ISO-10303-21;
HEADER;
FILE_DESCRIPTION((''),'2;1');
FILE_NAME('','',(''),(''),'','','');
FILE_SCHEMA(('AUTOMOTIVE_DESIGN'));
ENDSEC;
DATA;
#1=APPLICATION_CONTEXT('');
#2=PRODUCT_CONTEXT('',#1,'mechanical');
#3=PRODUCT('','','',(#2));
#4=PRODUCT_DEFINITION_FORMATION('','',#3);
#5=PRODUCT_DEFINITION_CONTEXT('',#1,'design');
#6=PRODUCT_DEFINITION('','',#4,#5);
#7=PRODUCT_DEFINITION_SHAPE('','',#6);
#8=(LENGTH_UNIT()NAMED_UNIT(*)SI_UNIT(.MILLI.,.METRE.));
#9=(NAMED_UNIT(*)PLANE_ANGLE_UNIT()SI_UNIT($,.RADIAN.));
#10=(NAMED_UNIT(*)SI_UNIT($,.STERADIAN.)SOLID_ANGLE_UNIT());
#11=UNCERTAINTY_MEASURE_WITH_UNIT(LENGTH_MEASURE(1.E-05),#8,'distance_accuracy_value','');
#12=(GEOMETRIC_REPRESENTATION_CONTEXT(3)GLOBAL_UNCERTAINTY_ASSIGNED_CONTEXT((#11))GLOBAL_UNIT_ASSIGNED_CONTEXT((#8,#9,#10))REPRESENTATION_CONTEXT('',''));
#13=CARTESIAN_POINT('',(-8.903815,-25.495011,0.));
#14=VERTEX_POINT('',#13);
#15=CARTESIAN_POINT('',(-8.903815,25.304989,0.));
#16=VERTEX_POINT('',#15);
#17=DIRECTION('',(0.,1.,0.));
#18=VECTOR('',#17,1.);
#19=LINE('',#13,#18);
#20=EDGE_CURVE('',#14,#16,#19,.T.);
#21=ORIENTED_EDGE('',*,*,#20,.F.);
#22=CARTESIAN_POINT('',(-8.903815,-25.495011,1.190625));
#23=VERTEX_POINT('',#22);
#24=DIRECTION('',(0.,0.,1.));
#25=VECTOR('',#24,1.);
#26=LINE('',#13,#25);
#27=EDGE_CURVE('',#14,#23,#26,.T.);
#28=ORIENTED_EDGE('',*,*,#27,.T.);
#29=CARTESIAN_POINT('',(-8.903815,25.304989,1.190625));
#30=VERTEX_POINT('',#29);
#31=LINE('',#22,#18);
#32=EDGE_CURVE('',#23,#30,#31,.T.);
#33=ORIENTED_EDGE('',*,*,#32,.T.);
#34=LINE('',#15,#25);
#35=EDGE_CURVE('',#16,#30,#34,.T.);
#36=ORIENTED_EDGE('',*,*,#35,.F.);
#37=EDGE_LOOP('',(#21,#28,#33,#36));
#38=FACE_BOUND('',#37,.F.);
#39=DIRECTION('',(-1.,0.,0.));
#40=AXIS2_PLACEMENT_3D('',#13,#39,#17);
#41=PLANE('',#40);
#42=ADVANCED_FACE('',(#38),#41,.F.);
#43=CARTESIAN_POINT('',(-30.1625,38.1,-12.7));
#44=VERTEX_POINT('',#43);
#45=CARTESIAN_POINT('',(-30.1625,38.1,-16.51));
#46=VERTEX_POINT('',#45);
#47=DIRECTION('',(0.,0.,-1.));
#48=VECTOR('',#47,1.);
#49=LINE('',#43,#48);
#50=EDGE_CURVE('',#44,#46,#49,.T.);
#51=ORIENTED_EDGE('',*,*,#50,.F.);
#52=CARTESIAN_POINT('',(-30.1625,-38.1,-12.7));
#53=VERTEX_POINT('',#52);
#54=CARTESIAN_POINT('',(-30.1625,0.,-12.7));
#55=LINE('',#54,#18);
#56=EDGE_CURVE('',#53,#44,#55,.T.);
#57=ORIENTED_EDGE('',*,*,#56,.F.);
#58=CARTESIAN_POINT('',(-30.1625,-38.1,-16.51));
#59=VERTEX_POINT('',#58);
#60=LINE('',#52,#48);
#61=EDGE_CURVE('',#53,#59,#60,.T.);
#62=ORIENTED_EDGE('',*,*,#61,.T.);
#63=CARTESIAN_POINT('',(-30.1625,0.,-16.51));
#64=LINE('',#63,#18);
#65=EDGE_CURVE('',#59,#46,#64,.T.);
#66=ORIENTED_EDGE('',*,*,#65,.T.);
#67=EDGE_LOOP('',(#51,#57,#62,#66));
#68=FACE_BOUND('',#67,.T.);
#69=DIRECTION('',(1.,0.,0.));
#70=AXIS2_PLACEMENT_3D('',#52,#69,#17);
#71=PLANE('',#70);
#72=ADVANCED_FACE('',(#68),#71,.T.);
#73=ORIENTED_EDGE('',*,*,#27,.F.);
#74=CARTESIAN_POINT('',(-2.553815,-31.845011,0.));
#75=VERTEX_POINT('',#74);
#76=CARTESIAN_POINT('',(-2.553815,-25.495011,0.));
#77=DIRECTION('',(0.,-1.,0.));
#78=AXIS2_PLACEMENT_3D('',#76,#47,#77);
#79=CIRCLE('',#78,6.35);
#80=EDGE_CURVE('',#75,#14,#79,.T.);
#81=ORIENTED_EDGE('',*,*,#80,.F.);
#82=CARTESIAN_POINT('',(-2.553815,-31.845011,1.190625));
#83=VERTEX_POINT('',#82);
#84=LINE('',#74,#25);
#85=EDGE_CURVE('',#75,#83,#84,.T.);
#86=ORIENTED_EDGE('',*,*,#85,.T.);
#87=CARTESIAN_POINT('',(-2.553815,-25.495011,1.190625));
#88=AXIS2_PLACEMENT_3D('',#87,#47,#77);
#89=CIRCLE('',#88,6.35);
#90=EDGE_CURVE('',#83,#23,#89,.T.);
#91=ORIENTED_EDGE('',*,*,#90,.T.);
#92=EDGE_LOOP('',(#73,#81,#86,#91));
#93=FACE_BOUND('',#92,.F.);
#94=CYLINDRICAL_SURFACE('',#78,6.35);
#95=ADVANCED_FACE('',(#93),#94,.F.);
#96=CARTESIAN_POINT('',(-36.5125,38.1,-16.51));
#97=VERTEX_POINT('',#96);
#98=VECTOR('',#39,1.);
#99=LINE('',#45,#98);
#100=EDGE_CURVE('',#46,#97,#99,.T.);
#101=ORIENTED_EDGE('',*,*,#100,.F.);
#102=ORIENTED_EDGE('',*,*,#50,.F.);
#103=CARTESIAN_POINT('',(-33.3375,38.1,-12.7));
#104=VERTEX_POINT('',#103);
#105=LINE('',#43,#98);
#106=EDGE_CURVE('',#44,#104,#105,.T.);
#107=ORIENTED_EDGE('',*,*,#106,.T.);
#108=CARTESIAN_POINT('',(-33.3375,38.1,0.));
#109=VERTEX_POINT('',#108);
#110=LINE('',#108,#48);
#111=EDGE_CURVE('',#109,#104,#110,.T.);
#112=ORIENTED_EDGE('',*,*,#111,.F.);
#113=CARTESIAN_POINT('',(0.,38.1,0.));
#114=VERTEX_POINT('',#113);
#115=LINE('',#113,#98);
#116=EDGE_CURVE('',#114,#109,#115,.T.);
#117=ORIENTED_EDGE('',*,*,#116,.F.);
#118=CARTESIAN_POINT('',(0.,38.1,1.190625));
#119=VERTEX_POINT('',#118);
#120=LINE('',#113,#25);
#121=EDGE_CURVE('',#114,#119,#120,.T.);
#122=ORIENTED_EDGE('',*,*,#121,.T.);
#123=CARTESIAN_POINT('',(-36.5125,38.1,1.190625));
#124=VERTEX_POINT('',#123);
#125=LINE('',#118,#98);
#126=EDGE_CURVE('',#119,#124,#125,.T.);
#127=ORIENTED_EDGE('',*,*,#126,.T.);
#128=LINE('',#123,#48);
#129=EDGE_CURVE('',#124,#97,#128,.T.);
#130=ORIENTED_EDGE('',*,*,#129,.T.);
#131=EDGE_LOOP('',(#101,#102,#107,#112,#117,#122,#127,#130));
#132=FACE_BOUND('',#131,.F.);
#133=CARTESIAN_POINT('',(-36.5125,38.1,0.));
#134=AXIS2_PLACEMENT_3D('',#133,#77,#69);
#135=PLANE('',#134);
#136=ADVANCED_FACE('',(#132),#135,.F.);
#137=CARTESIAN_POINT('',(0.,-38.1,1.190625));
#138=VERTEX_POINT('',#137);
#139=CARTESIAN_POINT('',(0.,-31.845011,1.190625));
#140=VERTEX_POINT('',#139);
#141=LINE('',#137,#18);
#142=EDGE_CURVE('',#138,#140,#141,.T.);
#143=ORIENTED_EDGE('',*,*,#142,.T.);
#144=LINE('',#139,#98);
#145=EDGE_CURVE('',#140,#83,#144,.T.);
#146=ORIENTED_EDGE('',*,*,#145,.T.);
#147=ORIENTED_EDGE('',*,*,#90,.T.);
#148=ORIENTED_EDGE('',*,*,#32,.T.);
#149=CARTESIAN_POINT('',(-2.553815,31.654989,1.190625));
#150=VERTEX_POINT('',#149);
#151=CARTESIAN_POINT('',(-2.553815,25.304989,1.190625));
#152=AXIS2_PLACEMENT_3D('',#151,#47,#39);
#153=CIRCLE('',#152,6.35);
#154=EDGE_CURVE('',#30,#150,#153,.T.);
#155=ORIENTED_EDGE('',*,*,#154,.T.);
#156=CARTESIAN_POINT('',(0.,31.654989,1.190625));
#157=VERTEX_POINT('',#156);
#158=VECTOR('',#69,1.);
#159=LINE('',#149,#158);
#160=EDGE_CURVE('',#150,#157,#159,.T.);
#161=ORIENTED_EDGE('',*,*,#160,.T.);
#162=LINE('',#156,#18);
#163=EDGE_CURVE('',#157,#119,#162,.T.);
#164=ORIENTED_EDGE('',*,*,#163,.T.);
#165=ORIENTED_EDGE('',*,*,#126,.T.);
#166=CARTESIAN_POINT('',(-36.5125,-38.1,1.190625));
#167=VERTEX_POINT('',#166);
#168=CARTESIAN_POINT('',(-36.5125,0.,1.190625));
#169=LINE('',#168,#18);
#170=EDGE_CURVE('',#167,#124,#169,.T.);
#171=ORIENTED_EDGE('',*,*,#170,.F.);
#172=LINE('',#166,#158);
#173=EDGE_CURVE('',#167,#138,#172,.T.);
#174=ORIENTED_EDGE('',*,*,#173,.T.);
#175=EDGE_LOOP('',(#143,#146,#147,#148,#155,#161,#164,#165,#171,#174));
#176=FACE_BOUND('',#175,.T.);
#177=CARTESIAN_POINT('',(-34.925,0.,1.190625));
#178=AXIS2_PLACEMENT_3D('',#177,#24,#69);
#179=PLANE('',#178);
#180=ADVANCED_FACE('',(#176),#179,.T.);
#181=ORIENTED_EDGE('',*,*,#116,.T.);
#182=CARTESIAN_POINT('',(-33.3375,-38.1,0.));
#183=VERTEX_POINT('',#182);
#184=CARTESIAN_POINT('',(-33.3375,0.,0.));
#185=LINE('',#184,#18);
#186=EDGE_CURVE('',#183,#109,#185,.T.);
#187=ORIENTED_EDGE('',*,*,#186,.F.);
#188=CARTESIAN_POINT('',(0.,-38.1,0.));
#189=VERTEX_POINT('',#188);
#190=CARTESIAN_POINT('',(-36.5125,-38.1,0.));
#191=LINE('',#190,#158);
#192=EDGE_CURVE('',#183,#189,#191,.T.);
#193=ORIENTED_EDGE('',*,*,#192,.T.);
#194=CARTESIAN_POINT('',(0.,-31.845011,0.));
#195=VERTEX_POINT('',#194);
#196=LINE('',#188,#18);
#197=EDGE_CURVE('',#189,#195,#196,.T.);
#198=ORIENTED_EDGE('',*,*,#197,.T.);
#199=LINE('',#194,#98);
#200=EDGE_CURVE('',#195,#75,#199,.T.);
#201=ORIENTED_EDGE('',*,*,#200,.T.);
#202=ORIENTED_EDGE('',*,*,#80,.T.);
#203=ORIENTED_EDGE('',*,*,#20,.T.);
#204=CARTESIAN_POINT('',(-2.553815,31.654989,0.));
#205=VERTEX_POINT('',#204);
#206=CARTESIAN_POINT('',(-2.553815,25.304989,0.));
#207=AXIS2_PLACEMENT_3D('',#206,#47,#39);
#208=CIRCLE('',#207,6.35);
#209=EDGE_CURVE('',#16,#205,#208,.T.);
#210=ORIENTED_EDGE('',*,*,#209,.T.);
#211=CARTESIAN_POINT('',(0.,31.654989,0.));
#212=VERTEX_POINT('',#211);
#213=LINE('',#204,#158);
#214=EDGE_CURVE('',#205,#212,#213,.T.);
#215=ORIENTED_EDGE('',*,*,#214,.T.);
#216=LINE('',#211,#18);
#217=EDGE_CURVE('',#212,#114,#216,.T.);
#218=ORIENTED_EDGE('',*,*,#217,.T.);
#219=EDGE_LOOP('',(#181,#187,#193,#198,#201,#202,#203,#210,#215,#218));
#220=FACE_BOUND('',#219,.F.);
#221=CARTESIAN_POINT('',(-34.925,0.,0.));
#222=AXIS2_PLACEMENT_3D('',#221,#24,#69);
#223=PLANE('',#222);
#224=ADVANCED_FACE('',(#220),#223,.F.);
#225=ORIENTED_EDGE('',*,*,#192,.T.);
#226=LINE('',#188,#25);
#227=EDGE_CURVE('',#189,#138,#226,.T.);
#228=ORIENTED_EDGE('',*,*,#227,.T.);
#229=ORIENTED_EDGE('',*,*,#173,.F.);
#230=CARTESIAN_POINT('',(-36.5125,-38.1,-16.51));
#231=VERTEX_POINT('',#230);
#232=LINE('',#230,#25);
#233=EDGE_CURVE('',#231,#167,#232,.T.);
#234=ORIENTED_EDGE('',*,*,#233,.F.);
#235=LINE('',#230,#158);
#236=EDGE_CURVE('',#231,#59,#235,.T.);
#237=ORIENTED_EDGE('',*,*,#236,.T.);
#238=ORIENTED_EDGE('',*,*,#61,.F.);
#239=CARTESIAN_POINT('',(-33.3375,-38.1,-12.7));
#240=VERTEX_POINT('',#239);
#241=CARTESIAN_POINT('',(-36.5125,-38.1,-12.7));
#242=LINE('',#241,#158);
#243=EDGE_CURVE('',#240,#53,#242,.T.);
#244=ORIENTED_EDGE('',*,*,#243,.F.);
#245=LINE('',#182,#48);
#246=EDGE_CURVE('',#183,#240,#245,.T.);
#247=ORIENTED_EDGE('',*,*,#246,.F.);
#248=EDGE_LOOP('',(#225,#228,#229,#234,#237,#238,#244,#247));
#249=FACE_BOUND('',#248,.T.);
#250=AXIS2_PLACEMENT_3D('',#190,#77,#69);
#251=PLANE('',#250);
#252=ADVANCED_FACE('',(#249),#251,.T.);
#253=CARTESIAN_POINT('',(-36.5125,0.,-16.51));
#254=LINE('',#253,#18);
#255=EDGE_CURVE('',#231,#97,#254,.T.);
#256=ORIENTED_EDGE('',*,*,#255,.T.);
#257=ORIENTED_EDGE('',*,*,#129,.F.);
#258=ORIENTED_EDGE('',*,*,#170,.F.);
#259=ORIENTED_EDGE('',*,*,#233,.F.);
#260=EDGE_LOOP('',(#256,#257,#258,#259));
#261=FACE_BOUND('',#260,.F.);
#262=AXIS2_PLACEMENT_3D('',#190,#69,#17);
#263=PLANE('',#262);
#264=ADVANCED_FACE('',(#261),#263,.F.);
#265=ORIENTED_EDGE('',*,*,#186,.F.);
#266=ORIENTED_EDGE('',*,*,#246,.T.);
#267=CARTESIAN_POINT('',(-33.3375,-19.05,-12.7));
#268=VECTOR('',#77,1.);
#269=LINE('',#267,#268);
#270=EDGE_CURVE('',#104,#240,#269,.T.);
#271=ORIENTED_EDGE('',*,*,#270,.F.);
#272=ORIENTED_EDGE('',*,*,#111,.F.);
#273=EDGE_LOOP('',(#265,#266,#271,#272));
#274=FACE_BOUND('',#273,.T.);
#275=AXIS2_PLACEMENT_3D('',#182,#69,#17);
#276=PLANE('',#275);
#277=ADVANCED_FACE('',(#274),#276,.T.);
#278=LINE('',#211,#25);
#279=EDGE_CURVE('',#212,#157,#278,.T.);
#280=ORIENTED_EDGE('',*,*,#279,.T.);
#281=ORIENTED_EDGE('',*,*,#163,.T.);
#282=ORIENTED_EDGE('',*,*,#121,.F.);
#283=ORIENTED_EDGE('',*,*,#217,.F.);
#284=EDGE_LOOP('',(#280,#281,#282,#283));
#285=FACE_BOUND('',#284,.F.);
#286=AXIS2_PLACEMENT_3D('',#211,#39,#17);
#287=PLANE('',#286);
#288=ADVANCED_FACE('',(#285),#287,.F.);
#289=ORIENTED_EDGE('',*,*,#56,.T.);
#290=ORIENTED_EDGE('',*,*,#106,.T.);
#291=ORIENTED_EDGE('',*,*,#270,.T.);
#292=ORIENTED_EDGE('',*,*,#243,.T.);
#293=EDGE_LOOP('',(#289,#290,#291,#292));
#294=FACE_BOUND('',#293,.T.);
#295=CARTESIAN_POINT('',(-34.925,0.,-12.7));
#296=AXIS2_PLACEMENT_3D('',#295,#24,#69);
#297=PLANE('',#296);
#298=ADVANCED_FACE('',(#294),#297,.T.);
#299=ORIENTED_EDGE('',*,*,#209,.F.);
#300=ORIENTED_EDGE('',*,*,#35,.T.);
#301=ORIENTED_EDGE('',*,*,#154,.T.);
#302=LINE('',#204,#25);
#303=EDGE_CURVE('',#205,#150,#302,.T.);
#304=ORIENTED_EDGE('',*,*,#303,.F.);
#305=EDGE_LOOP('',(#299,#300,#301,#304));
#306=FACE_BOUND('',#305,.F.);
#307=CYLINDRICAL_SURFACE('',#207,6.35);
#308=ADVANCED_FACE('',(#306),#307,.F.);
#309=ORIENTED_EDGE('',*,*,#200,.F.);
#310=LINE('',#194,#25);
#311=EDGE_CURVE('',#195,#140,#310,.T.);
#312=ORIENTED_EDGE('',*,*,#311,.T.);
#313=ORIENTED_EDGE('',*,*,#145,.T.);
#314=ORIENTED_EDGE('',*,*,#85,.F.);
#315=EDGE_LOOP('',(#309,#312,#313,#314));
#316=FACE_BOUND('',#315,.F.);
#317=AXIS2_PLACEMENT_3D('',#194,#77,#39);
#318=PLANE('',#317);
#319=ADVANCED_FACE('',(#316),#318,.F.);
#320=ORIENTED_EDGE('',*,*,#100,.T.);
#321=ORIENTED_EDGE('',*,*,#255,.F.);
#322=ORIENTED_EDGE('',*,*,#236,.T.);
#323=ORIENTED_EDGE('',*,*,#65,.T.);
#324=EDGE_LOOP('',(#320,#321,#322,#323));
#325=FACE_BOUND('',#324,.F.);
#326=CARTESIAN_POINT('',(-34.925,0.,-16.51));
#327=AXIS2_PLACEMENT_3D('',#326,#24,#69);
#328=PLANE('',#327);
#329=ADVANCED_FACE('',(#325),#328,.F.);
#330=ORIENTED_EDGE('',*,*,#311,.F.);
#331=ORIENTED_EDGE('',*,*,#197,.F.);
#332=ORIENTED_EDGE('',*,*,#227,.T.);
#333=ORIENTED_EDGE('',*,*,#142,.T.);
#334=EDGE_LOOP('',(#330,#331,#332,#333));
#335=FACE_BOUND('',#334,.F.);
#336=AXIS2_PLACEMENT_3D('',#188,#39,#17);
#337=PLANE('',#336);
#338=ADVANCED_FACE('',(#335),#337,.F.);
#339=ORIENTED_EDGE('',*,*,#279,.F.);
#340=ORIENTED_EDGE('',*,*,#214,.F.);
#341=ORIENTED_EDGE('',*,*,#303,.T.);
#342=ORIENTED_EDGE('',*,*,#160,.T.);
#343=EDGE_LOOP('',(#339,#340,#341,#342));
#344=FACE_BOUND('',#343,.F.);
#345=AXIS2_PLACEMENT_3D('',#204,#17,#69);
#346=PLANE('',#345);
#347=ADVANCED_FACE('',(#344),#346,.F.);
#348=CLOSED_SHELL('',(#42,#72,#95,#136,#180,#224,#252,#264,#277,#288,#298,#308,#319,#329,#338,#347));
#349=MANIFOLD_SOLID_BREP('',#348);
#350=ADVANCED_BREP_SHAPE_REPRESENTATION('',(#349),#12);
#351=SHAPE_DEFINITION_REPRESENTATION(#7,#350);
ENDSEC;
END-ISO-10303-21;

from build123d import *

# Parameters (mm, degrees)
F0_W     = 3.175
F0_H     = 76.2
F1_DEPTH = 1.190625
F2_DEPTH = 16.51
F3_START = -12.7
F3_DEPTH = 3.81


# Not quite as in the source:
# - a length typed as a fraction of an inch, garbled in the dataset ("3 / 203.2 mm" for 3/8 in), is restored


with BuildPart() as f1:
    # F0 (on Top) → F1 (new body)
    with BuildSketch(Plane.XY):
        with Locations((-34.925, 0)):
            Rectangle(F0_W, F0_H)
        with BuildLine():
            Line((-30.1625, 38.1), (-30.1625, -38.1))
            Line((-30.1625, -38.1), (0, -38.1))
            Line((0, -38.1), (0, -31.8450108171))
            Line((0, -31.8450108171), (-2.553815411, -31.8450108171))
            ThreePointArc((-2.553815411, -31.8450108171), (-7.0439434716, -29.9851388776), (-8.903815411, -25.4950108171))
            Line((-8.903815411, -25.4950108171), (-8.903815411, 25.3049891829))
            ThreePointArc((-8.903815411, 25.3049891829), (-7.0439434716, 29.7951172435), (-2.553815411, 31.6549891829))
            Line((-2.553815411, 31.6549891829), (0, 31.6549891829))
            Line((0, 31.6549891829), (0, 38.1))
            Line((0, 38.1), (-30.1625, 38.1))
        make_face()
        with Locations((-31.75, 0)):
            Rectangle(F0_W, F0_H)
    extrude(amount=F1_DEPTH)

    # F0 (on Top) → F2 (join)
    with BuildSketch(Plane.XY):
        with Locations((-34.925, 0)):
            Rectangle(F0_W, F0_H)
    extrude(amount=-F2_DEPTH)

    # F0 (on Top) → F3 (join)
    with BuildSketch(Plane.XY.offset(F3_START)):
        with Locations((-34.925, 0)):
            Rectangle(F0_W, F0_H)
        with Locations((-31.75, 0)):
            Rectangle(F0_W, F0_H)
    extrude(amount=-F3_DEPTH)


solid = f1.part
